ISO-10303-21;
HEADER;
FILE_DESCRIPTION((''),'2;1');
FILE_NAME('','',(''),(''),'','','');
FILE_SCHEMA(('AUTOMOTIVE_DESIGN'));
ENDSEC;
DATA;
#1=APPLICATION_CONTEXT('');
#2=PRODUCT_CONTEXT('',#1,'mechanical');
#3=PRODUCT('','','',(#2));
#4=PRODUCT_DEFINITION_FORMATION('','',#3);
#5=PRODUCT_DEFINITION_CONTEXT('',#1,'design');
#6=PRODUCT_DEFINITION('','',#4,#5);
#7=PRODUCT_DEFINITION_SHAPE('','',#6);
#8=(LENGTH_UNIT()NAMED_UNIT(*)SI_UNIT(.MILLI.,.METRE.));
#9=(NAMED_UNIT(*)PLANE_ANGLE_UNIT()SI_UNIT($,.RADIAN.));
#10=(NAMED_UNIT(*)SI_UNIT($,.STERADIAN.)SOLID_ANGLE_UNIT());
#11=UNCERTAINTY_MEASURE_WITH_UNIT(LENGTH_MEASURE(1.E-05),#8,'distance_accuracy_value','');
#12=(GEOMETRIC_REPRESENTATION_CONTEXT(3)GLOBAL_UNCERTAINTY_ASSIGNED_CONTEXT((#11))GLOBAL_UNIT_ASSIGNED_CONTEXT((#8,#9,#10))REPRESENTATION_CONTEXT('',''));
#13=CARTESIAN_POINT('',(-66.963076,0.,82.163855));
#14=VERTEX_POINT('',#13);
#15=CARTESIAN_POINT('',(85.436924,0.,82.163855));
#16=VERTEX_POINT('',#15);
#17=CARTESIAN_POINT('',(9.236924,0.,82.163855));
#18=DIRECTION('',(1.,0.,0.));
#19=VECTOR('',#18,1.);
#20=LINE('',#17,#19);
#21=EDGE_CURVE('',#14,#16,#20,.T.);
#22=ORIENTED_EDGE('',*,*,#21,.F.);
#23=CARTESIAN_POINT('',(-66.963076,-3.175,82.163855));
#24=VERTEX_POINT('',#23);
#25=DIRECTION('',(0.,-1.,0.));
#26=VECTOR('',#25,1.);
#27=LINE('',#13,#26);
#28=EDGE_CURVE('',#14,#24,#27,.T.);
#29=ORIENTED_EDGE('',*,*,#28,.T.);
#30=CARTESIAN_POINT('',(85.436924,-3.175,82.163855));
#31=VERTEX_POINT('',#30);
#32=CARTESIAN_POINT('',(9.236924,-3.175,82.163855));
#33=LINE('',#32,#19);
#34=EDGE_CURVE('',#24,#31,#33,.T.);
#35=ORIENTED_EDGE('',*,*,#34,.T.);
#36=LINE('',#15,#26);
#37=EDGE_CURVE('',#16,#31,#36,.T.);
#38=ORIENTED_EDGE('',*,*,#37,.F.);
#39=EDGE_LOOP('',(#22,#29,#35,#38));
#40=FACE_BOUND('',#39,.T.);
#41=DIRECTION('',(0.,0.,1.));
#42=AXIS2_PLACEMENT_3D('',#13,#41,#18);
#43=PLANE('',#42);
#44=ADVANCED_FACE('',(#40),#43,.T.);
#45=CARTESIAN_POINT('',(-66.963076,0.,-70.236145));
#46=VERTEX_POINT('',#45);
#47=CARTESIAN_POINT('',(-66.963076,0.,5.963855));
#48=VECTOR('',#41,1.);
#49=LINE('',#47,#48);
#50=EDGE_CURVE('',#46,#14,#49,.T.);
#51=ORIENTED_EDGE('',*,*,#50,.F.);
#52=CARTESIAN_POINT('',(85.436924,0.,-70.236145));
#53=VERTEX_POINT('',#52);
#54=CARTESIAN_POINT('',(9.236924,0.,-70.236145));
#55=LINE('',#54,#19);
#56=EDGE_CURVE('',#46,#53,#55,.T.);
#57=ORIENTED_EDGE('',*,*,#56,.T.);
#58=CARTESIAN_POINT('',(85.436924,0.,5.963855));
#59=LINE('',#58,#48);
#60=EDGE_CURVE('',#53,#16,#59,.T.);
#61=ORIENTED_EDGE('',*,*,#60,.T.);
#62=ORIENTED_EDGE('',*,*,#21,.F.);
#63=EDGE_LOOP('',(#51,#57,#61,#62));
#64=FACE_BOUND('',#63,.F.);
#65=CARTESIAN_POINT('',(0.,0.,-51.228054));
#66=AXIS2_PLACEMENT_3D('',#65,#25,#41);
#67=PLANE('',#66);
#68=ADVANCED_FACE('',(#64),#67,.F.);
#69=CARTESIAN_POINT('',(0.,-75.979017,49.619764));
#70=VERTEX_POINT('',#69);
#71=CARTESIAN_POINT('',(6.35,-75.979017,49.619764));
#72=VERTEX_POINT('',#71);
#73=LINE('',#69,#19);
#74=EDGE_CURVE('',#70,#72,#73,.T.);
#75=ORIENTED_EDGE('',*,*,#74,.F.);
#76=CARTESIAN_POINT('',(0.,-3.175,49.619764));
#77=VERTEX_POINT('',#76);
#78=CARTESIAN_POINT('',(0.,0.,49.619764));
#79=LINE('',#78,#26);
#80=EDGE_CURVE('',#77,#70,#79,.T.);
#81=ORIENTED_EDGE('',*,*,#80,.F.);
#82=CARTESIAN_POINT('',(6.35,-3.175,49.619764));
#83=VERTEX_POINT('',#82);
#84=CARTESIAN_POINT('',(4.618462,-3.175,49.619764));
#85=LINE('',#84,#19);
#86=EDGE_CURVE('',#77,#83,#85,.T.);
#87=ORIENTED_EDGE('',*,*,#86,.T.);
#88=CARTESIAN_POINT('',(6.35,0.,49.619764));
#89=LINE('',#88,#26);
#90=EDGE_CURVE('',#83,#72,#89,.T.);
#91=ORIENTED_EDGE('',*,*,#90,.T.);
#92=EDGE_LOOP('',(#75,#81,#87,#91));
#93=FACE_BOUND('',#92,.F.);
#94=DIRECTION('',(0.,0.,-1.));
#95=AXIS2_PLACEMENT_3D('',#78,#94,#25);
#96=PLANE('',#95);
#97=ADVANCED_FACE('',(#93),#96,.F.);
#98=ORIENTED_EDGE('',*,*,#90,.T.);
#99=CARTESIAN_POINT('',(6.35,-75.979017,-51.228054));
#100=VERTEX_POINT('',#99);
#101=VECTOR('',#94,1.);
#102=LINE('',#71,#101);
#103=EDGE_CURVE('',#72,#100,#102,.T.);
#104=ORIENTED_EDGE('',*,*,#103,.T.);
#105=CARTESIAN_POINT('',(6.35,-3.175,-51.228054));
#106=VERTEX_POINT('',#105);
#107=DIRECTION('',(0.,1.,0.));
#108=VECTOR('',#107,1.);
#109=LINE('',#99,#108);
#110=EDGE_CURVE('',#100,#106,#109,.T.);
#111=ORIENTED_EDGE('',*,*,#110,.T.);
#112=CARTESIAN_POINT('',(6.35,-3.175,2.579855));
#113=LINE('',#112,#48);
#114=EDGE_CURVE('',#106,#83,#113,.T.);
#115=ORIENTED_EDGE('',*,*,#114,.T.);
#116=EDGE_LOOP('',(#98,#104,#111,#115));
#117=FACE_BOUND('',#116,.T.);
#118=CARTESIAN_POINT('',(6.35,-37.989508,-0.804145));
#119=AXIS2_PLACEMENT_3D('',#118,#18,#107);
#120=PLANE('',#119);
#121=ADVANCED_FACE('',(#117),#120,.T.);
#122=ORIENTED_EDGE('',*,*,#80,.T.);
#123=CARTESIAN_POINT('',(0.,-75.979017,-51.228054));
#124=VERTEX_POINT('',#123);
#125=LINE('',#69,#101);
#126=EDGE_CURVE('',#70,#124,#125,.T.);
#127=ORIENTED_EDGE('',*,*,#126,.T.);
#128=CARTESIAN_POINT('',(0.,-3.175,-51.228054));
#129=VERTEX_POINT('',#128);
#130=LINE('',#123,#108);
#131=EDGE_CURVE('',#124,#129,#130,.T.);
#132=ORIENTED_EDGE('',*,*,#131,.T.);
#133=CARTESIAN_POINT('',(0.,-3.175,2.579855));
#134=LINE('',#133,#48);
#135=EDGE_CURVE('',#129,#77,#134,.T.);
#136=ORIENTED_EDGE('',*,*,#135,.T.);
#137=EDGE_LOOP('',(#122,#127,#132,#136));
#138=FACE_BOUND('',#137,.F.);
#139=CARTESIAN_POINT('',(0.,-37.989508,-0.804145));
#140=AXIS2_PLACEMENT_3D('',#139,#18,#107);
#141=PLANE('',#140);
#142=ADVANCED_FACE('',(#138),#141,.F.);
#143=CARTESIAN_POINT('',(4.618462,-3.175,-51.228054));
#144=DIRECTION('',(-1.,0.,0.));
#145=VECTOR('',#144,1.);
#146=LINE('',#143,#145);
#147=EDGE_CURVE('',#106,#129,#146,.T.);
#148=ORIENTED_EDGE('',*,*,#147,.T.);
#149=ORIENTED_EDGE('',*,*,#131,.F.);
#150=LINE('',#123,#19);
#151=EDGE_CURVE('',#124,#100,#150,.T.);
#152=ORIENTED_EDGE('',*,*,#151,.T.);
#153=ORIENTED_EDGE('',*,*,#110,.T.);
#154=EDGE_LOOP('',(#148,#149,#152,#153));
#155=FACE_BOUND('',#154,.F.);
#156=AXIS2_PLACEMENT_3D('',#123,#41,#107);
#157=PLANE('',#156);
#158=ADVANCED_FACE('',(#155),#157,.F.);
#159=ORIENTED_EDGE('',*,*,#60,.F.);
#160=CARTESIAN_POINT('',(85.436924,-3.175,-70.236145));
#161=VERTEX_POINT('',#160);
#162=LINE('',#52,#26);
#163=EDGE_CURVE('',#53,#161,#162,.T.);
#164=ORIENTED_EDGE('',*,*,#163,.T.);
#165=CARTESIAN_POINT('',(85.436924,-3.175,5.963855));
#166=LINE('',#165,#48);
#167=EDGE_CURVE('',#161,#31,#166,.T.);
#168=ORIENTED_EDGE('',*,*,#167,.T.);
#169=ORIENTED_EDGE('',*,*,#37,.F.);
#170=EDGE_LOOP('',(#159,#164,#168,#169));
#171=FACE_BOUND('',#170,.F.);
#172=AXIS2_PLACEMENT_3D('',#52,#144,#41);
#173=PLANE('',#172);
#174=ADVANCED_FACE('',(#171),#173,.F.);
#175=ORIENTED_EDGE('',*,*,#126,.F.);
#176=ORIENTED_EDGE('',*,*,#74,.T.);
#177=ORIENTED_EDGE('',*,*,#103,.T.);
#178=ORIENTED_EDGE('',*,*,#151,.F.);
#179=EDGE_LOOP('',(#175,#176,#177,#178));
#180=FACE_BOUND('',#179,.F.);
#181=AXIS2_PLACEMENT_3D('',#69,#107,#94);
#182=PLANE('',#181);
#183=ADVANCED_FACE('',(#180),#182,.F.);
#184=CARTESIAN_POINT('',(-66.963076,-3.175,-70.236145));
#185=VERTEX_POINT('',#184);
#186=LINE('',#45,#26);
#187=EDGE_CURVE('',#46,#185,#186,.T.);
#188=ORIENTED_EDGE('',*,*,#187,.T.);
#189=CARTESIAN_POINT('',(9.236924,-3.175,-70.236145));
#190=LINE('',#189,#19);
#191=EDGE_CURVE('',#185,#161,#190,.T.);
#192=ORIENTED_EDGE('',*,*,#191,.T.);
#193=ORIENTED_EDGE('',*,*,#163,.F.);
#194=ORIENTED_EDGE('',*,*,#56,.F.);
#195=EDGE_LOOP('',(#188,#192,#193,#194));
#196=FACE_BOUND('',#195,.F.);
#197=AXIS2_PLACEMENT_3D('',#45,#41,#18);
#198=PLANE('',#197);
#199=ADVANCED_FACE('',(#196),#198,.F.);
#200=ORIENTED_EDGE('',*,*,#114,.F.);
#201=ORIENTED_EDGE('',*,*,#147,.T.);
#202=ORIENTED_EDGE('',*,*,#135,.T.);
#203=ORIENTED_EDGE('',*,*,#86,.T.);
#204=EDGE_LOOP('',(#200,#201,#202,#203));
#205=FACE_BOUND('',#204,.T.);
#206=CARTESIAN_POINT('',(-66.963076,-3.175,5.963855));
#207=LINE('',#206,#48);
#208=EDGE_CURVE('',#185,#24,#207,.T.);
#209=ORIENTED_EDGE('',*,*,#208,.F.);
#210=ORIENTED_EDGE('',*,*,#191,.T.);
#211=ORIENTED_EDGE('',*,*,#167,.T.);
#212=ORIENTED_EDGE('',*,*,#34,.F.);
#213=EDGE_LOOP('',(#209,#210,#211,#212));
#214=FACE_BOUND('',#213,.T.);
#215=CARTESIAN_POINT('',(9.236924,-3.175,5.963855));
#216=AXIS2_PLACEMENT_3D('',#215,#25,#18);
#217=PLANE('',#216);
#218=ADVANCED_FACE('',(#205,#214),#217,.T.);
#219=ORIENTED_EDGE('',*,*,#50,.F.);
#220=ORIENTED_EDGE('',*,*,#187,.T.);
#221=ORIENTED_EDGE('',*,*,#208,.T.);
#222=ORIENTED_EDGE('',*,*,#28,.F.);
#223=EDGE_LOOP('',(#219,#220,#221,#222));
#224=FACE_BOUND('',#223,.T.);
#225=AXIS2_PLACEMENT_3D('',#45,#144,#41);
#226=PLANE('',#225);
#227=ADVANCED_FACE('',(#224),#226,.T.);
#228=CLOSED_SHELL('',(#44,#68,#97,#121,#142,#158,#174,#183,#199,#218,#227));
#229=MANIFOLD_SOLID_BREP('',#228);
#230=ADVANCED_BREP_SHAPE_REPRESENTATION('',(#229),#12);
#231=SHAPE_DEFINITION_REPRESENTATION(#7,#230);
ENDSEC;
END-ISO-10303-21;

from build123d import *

# Parameters (mm, degrees)
F0_W     = 152.4
F0_H     = 152.4
F1_DEPTH = 3.175
F3_DEPTH = 6.35


# Not quite as in the source:
# - a length typed as a fraction of an inch, garbled in the dataset ("3 / 203.2 mm" for 3/8 in), is restored
# - a feature names something its author has since deleted; it is built from what else it names


with BuildPart() as f1:
    # F0 (on Front) → F1 (new body)
    with BuildSketch(Plane.XZ):
        with Locations((9.2369243503, 5.9638554769)):
            Rectangle(F0_W, F0_H)
    extrude(amount=F1_DEPTH)

    # F2 (on Right) → F3 (join)
    with BuildSketch(Plane.YZ):
        Polygon((0, 0), (0, 49.6197640896), (-75.9790167212, 49.6197640896), (-75.9790167212, -51.2280538678), (0, -51.2280538678), align=None)
    extrude(amount=F3_DEPTH)


solid = f1.part
